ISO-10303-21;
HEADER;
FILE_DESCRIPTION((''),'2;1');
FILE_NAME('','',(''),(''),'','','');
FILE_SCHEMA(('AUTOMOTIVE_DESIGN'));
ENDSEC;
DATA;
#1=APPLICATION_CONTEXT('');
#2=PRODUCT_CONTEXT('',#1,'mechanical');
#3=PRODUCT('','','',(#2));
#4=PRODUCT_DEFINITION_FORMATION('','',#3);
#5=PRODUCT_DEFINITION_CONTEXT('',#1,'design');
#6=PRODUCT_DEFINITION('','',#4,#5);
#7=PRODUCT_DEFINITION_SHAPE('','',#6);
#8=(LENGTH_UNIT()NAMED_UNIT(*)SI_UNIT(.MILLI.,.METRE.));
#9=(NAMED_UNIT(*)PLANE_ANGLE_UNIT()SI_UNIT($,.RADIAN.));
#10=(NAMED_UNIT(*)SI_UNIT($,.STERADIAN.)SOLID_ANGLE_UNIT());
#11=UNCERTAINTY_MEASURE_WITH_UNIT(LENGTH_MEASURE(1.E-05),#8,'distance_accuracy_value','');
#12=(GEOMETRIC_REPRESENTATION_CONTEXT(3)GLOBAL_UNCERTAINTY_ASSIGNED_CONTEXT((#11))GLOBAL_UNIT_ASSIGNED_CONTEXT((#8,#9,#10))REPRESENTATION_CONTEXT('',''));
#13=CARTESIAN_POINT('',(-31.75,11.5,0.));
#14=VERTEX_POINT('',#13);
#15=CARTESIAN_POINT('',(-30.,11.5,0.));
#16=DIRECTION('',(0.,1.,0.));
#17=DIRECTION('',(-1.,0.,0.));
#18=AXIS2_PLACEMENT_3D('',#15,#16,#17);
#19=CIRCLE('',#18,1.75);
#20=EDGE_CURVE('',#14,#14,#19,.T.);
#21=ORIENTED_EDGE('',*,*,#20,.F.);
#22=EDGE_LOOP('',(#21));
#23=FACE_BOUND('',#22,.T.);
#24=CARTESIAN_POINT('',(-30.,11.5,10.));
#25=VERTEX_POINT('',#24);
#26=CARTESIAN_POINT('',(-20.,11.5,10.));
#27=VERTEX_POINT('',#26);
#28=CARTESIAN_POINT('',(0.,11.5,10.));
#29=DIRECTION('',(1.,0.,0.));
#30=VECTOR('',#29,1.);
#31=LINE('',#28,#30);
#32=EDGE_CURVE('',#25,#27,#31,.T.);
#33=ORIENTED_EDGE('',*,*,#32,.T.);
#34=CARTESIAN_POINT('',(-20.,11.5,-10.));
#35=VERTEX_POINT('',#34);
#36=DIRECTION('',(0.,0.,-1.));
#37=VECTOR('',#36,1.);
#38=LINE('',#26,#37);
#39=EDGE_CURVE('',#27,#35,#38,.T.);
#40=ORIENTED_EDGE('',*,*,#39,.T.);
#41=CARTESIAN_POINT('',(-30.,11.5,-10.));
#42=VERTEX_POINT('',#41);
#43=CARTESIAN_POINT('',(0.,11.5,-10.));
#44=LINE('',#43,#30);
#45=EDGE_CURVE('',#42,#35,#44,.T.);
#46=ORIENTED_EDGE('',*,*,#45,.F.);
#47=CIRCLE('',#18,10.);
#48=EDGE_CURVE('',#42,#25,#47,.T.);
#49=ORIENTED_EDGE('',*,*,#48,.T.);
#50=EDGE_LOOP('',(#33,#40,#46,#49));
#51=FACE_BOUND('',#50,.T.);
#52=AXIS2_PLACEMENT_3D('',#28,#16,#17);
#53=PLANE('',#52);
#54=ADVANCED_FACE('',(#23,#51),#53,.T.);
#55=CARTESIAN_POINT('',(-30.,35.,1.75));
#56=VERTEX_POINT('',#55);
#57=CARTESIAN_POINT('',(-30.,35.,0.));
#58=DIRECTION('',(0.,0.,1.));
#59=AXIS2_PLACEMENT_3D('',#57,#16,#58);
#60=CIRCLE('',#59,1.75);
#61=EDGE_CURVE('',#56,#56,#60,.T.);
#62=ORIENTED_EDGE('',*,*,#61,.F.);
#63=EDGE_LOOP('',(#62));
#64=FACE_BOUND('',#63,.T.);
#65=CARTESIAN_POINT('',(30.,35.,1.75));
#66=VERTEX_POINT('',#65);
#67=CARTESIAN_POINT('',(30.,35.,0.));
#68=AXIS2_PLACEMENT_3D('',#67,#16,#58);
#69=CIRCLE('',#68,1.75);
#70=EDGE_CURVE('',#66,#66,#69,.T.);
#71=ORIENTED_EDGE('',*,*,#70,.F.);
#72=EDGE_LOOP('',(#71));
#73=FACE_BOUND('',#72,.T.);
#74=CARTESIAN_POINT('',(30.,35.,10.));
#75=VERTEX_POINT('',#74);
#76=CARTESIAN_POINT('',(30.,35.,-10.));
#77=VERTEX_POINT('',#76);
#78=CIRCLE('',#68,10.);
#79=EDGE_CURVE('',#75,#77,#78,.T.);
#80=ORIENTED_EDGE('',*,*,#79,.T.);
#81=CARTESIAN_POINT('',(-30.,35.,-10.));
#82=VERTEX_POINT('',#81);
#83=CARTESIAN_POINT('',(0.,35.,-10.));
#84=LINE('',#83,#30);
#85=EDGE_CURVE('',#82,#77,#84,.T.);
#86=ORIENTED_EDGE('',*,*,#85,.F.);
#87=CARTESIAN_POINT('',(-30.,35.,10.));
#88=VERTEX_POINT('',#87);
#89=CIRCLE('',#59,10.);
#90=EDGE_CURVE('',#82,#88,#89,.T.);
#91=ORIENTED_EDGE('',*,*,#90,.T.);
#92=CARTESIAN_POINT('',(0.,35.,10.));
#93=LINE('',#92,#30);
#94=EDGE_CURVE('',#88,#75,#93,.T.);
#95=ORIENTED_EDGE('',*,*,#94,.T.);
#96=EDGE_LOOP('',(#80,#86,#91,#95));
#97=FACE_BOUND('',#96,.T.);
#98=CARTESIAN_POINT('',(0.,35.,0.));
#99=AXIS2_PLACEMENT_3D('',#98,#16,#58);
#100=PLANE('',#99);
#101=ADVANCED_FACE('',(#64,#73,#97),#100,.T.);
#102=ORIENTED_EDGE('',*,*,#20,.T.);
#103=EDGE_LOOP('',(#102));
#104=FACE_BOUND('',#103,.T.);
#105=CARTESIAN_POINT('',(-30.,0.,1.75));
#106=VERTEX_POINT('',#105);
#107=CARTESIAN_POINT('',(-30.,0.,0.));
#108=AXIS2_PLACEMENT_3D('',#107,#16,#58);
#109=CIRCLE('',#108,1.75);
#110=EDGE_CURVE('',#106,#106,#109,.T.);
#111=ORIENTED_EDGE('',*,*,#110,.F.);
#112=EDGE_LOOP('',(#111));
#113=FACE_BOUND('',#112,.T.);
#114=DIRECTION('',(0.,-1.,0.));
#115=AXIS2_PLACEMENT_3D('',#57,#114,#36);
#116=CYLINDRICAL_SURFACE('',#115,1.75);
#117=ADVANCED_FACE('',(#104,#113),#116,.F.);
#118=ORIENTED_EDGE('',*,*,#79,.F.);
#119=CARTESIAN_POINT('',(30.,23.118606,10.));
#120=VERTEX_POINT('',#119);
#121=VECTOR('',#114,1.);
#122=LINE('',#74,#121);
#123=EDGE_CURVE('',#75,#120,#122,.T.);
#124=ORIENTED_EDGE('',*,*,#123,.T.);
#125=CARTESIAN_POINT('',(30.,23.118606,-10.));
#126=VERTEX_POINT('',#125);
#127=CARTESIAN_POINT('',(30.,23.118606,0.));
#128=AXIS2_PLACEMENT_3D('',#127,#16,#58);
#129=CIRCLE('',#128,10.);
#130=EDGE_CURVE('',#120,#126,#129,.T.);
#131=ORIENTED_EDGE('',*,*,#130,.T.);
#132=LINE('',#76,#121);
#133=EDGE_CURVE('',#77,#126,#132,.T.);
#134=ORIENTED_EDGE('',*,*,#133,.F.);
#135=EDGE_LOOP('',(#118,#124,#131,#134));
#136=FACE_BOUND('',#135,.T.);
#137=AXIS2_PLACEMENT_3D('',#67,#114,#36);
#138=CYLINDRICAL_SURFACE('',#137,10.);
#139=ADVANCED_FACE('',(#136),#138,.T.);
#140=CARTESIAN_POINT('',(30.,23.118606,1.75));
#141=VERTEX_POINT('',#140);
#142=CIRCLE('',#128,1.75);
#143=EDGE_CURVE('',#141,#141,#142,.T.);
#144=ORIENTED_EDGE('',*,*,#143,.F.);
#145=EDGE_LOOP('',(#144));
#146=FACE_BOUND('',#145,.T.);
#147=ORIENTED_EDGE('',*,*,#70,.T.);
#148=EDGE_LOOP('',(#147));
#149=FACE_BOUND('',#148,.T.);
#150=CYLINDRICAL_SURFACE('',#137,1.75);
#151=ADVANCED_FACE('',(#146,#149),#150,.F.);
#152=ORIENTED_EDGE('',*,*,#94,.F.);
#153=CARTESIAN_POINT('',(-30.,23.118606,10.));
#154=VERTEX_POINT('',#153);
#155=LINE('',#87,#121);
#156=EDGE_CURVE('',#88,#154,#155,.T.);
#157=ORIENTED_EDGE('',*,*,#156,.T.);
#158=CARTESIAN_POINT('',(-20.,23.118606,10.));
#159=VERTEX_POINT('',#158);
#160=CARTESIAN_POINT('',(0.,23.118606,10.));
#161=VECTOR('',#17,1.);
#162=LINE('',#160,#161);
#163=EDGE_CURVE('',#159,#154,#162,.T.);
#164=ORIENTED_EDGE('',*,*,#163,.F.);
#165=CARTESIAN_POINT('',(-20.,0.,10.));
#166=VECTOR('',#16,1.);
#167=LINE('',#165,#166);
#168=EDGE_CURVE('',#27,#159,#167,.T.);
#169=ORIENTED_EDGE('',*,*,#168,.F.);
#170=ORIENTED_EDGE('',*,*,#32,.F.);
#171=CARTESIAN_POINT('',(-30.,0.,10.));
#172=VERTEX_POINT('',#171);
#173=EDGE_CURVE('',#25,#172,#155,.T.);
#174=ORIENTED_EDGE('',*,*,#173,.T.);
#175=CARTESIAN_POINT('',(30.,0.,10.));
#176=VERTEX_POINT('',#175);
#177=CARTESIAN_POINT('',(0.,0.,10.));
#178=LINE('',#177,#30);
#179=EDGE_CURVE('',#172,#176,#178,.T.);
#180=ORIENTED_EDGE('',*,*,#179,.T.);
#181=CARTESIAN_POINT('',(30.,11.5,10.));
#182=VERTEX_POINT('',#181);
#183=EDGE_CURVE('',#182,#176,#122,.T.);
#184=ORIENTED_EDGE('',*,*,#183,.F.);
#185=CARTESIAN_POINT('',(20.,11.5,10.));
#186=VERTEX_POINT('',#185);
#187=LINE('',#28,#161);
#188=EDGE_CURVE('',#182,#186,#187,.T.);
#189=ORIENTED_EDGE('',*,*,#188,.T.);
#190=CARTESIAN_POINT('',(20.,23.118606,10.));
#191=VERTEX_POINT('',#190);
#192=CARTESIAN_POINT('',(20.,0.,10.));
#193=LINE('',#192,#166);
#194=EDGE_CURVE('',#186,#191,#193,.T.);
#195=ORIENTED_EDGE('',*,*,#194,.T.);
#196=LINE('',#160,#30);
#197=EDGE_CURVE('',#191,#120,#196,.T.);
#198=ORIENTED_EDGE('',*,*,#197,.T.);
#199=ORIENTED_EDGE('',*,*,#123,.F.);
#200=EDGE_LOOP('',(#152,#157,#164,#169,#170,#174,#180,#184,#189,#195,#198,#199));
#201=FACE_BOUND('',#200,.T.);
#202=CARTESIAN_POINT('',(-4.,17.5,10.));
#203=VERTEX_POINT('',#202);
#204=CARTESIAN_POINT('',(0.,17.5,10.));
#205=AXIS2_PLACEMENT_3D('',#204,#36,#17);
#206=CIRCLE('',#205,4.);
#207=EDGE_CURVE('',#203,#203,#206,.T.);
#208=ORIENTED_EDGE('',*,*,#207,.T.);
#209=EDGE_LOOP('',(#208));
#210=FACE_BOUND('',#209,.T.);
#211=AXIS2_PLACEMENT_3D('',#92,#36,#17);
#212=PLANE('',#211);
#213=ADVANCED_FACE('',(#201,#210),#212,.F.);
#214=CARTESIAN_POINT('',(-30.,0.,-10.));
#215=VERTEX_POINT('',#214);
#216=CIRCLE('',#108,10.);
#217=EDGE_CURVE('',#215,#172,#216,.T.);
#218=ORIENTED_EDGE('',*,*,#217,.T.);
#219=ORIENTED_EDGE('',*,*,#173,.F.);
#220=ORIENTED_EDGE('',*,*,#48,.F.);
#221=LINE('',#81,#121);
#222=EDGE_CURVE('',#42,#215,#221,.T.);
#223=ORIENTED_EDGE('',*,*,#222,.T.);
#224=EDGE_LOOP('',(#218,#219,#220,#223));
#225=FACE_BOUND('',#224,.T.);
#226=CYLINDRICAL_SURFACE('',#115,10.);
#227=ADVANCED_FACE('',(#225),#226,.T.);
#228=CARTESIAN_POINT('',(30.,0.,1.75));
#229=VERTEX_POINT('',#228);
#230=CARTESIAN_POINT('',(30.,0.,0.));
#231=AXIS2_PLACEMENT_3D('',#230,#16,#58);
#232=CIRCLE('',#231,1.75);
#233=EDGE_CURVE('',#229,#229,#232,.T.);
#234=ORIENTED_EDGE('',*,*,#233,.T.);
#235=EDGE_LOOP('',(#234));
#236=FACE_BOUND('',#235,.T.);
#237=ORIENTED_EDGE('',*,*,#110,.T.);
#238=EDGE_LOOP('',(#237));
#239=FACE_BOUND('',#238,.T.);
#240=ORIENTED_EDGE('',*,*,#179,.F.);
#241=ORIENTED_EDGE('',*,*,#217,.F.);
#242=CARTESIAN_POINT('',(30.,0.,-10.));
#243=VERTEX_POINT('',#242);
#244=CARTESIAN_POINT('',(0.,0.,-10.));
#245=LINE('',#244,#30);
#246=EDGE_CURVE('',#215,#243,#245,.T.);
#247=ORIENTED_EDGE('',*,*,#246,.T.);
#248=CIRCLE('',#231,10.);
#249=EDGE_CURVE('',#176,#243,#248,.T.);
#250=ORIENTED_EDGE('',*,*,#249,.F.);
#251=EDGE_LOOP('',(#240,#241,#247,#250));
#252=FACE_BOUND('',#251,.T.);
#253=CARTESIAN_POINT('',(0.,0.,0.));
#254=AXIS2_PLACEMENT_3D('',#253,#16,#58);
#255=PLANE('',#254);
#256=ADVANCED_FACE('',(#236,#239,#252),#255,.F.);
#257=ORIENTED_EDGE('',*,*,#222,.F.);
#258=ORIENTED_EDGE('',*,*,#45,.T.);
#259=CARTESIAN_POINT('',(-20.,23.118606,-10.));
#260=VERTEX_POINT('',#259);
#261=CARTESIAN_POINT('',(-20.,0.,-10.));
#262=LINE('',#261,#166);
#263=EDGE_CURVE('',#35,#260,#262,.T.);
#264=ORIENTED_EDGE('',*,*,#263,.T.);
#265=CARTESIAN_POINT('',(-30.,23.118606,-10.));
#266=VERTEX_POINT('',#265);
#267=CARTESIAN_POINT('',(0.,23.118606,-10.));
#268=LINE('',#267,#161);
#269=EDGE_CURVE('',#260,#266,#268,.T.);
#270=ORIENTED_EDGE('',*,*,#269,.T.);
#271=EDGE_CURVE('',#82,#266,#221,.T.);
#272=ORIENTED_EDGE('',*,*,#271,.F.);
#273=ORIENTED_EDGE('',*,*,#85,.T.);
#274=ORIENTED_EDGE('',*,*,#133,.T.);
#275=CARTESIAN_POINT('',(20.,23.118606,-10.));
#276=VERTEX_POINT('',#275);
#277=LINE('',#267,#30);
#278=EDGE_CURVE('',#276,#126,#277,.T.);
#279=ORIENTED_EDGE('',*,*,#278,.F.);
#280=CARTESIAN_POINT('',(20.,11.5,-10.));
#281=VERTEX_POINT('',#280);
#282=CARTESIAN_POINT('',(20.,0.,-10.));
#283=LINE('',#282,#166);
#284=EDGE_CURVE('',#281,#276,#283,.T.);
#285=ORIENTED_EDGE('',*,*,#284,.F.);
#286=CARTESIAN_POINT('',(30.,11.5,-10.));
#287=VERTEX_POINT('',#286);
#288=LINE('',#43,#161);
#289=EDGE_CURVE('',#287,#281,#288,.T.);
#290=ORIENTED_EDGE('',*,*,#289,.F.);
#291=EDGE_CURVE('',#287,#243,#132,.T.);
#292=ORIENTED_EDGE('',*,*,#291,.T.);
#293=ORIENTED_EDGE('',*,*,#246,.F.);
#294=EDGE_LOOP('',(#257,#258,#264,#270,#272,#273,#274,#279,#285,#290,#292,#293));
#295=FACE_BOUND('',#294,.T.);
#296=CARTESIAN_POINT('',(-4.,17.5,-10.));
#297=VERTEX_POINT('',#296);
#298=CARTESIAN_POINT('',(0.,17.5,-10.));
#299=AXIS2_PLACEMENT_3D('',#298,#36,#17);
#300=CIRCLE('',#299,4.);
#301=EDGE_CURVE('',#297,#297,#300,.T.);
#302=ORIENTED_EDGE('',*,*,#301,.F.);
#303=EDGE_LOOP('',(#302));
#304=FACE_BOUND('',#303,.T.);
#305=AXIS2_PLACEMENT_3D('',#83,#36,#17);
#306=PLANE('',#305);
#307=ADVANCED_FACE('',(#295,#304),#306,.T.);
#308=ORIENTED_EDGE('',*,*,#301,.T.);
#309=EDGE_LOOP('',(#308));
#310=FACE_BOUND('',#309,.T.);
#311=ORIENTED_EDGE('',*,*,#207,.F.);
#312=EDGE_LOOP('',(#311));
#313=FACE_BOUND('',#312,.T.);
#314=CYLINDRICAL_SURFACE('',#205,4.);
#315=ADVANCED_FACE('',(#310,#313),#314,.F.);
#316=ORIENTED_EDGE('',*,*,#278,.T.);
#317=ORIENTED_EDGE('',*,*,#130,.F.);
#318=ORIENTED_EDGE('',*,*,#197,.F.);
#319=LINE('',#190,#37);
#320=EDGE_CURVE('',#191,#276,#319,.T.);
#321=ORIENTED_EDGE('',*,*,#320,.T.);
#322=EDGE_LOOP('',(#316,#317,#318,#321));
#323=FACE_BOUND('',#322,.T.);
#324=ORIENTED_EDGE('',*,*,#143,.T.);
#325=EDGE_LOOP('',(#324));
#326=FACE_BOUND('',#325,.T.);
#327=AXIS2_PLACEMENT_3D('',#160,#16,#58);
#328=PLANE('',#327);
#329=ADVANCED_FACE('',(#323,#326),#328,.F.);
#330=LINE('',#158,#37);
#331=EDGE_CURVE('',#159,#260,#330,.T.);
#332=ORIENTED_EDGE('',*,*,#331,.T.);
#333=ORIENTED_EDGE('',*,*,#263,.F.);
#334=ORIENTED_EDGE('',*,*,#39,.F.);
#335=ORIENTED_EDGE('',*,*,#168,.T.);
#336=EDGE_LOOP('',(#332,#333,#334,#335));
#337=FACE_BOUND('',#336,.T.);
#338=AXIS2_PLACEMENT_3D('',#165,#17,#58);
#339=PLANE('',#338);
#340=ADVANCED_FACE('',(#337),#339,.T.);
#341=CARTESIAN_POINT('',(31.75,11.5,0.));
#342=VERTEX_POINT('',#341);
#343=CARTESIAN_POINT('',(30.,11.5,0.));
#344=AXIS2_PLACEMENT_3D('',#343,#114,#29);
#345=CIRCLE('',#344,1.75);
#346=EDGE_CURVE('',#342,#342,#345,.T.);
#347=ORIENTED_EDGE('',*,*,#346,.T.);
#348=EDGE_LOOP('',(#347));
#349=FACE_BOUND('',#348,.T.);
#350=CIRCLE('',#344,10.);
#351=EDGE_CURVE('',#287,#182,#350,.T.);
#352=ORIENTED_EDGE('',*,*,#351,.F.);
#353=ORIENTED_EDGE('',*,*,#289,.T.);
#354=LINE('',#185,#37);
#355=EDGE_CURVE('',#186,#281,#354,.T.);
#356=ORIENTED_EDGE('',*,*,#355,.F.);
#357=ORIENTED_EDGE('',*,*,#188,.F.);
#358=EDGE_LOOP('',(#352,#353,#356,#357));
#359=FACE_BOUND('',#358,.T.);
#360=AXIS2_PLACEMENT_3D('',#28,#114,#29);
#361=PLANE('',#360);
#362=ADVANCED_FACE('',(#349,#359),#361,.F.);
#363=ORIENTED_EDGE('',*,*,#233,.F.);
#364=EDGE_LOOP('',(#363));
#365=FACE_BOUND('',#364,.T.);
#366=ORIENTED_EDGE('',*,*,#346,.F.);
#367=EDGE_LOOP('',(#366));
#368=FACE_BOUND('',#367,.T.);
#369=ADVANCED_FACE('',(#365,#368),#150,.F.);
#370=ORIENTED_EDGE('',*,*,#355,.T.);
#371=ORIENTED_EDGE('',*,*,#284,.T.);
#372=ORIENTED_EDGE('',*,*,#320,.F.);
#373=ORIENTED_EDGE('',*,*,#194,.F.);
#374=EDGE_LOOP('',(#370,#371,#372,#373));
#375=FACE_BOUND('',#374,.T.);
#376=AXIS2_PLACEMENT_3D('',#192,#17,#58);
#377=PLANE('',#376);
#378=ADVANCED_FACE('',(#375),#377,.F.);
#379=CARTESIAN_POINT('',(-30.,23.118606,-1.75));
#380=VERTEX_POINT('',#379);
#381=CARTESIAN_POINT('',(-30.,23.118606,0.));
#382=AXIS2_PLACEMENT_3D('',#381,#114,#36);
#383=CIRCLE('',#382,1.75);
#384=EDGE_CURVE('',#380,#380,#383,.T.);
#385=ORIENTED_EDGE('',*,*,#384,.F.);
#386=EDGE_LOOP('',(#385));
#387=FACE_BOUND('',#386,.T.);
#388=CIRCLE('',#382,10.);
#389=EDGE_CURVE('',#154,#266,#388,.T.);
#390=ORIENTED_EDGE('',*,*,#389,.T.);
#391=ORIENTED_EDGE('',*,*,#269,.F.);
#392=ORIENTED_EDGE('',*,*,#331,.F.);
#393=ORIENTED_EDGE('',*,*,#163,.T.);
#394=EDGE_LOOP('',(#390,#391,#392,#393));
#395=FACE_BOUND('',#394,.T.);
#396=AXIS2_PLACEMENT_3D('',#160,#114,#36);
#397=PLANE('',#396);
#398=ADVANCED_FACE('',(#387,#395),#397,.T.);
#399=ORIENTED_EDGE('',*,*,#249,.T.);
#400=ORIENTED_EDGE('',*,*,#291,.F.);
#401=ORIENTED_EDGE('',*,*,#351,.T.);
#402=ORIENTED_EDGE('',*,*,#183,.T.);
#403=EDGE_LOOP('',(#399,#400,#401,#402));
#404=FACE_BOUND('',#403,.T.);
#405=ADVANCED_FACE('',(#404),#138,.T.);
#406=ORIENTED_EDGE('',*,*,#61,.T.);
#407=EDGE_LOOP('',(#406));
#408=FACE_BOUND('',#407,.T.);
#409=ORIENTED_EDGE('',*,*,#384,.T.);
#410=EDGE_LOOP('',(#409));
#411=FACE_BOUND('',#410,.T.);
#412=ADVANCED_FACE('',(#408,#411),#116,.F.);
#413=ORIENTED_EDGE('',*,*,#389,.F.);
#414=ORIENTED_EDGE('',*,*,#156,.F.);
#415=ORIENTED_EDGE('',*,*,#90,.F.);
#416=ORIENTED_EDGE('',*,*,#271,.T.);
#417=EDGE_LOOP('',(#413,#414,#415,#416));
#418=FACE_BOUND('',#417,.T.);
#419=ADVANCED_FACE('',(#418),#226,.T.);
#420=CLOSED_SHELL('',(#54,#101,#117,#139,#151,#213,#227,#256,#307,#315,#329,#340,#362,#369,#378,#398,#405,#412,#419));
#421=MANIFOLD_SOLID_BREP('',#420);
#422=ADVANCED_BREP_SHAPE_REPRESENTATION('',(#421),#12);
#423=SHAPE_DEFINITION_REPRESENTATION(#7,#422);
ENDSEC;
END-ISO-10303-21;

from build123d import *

# Parameters (mm, degrees)
SKETCH1_R           = 1.75
BOSS_EXTRUDE1_DEPTH = 35
SKETCH3_W           = 24.518111011
SKETCH3_H           = 11.618606297
SKETCH3_R           = 4
CUT_EXTRUDE1_DEPTH  = 20


with BuildPart() as part:
    # Sketch1 → Boss-Extrude1 (new body)
    with BuildSketch(Plane(origin=(0, 0, 0), x_dir=(1, 0, 0), z_dir=(0, 1, 0))):
        with BuildLine():
            Line((30, 10), (-30, 10))
            ThreePointArc((-30, 10), (-40, 0), (-30, -10))
            Line((-30, -10), (30, -10))
            ThreePointArc((30, -10), (40, 0), (30, 10))
        make_face()
        with Locations((-30, 0)):
            Circle(SKETCH1_R, mode=Mode.SUBTRACT)
        with Locations((30, 0)):
            Circle(SKETCH1_R, mode=Mode.SUBTRACT)
    extrude(amount=BOSS_EXTRUDE1_DEPTH)

    # Sketch3 → Cut-Extrude1 (cut)
    with BuildSketch(Plane(origin=(0, 0, -10), x_dir=(-1, 0, 0), z_dir=(0, 0, -1))):
        with Locations((32.259055506, 17.309303148)):
            Rectangle(SKETCH3_W, SKETCH3_H)
        with Locations((-32.259055506, 17.309303148)):
            Rectangle(SKETCH3_W, SKETCH3_H)
        with Locations((0, 17.5)):
            Circle(SKETCH3_R)
    extrude(amount=-CUT_EXTRUDE1_DEPTH, mode=Mode.SUBTRACT)


solid = part.part
